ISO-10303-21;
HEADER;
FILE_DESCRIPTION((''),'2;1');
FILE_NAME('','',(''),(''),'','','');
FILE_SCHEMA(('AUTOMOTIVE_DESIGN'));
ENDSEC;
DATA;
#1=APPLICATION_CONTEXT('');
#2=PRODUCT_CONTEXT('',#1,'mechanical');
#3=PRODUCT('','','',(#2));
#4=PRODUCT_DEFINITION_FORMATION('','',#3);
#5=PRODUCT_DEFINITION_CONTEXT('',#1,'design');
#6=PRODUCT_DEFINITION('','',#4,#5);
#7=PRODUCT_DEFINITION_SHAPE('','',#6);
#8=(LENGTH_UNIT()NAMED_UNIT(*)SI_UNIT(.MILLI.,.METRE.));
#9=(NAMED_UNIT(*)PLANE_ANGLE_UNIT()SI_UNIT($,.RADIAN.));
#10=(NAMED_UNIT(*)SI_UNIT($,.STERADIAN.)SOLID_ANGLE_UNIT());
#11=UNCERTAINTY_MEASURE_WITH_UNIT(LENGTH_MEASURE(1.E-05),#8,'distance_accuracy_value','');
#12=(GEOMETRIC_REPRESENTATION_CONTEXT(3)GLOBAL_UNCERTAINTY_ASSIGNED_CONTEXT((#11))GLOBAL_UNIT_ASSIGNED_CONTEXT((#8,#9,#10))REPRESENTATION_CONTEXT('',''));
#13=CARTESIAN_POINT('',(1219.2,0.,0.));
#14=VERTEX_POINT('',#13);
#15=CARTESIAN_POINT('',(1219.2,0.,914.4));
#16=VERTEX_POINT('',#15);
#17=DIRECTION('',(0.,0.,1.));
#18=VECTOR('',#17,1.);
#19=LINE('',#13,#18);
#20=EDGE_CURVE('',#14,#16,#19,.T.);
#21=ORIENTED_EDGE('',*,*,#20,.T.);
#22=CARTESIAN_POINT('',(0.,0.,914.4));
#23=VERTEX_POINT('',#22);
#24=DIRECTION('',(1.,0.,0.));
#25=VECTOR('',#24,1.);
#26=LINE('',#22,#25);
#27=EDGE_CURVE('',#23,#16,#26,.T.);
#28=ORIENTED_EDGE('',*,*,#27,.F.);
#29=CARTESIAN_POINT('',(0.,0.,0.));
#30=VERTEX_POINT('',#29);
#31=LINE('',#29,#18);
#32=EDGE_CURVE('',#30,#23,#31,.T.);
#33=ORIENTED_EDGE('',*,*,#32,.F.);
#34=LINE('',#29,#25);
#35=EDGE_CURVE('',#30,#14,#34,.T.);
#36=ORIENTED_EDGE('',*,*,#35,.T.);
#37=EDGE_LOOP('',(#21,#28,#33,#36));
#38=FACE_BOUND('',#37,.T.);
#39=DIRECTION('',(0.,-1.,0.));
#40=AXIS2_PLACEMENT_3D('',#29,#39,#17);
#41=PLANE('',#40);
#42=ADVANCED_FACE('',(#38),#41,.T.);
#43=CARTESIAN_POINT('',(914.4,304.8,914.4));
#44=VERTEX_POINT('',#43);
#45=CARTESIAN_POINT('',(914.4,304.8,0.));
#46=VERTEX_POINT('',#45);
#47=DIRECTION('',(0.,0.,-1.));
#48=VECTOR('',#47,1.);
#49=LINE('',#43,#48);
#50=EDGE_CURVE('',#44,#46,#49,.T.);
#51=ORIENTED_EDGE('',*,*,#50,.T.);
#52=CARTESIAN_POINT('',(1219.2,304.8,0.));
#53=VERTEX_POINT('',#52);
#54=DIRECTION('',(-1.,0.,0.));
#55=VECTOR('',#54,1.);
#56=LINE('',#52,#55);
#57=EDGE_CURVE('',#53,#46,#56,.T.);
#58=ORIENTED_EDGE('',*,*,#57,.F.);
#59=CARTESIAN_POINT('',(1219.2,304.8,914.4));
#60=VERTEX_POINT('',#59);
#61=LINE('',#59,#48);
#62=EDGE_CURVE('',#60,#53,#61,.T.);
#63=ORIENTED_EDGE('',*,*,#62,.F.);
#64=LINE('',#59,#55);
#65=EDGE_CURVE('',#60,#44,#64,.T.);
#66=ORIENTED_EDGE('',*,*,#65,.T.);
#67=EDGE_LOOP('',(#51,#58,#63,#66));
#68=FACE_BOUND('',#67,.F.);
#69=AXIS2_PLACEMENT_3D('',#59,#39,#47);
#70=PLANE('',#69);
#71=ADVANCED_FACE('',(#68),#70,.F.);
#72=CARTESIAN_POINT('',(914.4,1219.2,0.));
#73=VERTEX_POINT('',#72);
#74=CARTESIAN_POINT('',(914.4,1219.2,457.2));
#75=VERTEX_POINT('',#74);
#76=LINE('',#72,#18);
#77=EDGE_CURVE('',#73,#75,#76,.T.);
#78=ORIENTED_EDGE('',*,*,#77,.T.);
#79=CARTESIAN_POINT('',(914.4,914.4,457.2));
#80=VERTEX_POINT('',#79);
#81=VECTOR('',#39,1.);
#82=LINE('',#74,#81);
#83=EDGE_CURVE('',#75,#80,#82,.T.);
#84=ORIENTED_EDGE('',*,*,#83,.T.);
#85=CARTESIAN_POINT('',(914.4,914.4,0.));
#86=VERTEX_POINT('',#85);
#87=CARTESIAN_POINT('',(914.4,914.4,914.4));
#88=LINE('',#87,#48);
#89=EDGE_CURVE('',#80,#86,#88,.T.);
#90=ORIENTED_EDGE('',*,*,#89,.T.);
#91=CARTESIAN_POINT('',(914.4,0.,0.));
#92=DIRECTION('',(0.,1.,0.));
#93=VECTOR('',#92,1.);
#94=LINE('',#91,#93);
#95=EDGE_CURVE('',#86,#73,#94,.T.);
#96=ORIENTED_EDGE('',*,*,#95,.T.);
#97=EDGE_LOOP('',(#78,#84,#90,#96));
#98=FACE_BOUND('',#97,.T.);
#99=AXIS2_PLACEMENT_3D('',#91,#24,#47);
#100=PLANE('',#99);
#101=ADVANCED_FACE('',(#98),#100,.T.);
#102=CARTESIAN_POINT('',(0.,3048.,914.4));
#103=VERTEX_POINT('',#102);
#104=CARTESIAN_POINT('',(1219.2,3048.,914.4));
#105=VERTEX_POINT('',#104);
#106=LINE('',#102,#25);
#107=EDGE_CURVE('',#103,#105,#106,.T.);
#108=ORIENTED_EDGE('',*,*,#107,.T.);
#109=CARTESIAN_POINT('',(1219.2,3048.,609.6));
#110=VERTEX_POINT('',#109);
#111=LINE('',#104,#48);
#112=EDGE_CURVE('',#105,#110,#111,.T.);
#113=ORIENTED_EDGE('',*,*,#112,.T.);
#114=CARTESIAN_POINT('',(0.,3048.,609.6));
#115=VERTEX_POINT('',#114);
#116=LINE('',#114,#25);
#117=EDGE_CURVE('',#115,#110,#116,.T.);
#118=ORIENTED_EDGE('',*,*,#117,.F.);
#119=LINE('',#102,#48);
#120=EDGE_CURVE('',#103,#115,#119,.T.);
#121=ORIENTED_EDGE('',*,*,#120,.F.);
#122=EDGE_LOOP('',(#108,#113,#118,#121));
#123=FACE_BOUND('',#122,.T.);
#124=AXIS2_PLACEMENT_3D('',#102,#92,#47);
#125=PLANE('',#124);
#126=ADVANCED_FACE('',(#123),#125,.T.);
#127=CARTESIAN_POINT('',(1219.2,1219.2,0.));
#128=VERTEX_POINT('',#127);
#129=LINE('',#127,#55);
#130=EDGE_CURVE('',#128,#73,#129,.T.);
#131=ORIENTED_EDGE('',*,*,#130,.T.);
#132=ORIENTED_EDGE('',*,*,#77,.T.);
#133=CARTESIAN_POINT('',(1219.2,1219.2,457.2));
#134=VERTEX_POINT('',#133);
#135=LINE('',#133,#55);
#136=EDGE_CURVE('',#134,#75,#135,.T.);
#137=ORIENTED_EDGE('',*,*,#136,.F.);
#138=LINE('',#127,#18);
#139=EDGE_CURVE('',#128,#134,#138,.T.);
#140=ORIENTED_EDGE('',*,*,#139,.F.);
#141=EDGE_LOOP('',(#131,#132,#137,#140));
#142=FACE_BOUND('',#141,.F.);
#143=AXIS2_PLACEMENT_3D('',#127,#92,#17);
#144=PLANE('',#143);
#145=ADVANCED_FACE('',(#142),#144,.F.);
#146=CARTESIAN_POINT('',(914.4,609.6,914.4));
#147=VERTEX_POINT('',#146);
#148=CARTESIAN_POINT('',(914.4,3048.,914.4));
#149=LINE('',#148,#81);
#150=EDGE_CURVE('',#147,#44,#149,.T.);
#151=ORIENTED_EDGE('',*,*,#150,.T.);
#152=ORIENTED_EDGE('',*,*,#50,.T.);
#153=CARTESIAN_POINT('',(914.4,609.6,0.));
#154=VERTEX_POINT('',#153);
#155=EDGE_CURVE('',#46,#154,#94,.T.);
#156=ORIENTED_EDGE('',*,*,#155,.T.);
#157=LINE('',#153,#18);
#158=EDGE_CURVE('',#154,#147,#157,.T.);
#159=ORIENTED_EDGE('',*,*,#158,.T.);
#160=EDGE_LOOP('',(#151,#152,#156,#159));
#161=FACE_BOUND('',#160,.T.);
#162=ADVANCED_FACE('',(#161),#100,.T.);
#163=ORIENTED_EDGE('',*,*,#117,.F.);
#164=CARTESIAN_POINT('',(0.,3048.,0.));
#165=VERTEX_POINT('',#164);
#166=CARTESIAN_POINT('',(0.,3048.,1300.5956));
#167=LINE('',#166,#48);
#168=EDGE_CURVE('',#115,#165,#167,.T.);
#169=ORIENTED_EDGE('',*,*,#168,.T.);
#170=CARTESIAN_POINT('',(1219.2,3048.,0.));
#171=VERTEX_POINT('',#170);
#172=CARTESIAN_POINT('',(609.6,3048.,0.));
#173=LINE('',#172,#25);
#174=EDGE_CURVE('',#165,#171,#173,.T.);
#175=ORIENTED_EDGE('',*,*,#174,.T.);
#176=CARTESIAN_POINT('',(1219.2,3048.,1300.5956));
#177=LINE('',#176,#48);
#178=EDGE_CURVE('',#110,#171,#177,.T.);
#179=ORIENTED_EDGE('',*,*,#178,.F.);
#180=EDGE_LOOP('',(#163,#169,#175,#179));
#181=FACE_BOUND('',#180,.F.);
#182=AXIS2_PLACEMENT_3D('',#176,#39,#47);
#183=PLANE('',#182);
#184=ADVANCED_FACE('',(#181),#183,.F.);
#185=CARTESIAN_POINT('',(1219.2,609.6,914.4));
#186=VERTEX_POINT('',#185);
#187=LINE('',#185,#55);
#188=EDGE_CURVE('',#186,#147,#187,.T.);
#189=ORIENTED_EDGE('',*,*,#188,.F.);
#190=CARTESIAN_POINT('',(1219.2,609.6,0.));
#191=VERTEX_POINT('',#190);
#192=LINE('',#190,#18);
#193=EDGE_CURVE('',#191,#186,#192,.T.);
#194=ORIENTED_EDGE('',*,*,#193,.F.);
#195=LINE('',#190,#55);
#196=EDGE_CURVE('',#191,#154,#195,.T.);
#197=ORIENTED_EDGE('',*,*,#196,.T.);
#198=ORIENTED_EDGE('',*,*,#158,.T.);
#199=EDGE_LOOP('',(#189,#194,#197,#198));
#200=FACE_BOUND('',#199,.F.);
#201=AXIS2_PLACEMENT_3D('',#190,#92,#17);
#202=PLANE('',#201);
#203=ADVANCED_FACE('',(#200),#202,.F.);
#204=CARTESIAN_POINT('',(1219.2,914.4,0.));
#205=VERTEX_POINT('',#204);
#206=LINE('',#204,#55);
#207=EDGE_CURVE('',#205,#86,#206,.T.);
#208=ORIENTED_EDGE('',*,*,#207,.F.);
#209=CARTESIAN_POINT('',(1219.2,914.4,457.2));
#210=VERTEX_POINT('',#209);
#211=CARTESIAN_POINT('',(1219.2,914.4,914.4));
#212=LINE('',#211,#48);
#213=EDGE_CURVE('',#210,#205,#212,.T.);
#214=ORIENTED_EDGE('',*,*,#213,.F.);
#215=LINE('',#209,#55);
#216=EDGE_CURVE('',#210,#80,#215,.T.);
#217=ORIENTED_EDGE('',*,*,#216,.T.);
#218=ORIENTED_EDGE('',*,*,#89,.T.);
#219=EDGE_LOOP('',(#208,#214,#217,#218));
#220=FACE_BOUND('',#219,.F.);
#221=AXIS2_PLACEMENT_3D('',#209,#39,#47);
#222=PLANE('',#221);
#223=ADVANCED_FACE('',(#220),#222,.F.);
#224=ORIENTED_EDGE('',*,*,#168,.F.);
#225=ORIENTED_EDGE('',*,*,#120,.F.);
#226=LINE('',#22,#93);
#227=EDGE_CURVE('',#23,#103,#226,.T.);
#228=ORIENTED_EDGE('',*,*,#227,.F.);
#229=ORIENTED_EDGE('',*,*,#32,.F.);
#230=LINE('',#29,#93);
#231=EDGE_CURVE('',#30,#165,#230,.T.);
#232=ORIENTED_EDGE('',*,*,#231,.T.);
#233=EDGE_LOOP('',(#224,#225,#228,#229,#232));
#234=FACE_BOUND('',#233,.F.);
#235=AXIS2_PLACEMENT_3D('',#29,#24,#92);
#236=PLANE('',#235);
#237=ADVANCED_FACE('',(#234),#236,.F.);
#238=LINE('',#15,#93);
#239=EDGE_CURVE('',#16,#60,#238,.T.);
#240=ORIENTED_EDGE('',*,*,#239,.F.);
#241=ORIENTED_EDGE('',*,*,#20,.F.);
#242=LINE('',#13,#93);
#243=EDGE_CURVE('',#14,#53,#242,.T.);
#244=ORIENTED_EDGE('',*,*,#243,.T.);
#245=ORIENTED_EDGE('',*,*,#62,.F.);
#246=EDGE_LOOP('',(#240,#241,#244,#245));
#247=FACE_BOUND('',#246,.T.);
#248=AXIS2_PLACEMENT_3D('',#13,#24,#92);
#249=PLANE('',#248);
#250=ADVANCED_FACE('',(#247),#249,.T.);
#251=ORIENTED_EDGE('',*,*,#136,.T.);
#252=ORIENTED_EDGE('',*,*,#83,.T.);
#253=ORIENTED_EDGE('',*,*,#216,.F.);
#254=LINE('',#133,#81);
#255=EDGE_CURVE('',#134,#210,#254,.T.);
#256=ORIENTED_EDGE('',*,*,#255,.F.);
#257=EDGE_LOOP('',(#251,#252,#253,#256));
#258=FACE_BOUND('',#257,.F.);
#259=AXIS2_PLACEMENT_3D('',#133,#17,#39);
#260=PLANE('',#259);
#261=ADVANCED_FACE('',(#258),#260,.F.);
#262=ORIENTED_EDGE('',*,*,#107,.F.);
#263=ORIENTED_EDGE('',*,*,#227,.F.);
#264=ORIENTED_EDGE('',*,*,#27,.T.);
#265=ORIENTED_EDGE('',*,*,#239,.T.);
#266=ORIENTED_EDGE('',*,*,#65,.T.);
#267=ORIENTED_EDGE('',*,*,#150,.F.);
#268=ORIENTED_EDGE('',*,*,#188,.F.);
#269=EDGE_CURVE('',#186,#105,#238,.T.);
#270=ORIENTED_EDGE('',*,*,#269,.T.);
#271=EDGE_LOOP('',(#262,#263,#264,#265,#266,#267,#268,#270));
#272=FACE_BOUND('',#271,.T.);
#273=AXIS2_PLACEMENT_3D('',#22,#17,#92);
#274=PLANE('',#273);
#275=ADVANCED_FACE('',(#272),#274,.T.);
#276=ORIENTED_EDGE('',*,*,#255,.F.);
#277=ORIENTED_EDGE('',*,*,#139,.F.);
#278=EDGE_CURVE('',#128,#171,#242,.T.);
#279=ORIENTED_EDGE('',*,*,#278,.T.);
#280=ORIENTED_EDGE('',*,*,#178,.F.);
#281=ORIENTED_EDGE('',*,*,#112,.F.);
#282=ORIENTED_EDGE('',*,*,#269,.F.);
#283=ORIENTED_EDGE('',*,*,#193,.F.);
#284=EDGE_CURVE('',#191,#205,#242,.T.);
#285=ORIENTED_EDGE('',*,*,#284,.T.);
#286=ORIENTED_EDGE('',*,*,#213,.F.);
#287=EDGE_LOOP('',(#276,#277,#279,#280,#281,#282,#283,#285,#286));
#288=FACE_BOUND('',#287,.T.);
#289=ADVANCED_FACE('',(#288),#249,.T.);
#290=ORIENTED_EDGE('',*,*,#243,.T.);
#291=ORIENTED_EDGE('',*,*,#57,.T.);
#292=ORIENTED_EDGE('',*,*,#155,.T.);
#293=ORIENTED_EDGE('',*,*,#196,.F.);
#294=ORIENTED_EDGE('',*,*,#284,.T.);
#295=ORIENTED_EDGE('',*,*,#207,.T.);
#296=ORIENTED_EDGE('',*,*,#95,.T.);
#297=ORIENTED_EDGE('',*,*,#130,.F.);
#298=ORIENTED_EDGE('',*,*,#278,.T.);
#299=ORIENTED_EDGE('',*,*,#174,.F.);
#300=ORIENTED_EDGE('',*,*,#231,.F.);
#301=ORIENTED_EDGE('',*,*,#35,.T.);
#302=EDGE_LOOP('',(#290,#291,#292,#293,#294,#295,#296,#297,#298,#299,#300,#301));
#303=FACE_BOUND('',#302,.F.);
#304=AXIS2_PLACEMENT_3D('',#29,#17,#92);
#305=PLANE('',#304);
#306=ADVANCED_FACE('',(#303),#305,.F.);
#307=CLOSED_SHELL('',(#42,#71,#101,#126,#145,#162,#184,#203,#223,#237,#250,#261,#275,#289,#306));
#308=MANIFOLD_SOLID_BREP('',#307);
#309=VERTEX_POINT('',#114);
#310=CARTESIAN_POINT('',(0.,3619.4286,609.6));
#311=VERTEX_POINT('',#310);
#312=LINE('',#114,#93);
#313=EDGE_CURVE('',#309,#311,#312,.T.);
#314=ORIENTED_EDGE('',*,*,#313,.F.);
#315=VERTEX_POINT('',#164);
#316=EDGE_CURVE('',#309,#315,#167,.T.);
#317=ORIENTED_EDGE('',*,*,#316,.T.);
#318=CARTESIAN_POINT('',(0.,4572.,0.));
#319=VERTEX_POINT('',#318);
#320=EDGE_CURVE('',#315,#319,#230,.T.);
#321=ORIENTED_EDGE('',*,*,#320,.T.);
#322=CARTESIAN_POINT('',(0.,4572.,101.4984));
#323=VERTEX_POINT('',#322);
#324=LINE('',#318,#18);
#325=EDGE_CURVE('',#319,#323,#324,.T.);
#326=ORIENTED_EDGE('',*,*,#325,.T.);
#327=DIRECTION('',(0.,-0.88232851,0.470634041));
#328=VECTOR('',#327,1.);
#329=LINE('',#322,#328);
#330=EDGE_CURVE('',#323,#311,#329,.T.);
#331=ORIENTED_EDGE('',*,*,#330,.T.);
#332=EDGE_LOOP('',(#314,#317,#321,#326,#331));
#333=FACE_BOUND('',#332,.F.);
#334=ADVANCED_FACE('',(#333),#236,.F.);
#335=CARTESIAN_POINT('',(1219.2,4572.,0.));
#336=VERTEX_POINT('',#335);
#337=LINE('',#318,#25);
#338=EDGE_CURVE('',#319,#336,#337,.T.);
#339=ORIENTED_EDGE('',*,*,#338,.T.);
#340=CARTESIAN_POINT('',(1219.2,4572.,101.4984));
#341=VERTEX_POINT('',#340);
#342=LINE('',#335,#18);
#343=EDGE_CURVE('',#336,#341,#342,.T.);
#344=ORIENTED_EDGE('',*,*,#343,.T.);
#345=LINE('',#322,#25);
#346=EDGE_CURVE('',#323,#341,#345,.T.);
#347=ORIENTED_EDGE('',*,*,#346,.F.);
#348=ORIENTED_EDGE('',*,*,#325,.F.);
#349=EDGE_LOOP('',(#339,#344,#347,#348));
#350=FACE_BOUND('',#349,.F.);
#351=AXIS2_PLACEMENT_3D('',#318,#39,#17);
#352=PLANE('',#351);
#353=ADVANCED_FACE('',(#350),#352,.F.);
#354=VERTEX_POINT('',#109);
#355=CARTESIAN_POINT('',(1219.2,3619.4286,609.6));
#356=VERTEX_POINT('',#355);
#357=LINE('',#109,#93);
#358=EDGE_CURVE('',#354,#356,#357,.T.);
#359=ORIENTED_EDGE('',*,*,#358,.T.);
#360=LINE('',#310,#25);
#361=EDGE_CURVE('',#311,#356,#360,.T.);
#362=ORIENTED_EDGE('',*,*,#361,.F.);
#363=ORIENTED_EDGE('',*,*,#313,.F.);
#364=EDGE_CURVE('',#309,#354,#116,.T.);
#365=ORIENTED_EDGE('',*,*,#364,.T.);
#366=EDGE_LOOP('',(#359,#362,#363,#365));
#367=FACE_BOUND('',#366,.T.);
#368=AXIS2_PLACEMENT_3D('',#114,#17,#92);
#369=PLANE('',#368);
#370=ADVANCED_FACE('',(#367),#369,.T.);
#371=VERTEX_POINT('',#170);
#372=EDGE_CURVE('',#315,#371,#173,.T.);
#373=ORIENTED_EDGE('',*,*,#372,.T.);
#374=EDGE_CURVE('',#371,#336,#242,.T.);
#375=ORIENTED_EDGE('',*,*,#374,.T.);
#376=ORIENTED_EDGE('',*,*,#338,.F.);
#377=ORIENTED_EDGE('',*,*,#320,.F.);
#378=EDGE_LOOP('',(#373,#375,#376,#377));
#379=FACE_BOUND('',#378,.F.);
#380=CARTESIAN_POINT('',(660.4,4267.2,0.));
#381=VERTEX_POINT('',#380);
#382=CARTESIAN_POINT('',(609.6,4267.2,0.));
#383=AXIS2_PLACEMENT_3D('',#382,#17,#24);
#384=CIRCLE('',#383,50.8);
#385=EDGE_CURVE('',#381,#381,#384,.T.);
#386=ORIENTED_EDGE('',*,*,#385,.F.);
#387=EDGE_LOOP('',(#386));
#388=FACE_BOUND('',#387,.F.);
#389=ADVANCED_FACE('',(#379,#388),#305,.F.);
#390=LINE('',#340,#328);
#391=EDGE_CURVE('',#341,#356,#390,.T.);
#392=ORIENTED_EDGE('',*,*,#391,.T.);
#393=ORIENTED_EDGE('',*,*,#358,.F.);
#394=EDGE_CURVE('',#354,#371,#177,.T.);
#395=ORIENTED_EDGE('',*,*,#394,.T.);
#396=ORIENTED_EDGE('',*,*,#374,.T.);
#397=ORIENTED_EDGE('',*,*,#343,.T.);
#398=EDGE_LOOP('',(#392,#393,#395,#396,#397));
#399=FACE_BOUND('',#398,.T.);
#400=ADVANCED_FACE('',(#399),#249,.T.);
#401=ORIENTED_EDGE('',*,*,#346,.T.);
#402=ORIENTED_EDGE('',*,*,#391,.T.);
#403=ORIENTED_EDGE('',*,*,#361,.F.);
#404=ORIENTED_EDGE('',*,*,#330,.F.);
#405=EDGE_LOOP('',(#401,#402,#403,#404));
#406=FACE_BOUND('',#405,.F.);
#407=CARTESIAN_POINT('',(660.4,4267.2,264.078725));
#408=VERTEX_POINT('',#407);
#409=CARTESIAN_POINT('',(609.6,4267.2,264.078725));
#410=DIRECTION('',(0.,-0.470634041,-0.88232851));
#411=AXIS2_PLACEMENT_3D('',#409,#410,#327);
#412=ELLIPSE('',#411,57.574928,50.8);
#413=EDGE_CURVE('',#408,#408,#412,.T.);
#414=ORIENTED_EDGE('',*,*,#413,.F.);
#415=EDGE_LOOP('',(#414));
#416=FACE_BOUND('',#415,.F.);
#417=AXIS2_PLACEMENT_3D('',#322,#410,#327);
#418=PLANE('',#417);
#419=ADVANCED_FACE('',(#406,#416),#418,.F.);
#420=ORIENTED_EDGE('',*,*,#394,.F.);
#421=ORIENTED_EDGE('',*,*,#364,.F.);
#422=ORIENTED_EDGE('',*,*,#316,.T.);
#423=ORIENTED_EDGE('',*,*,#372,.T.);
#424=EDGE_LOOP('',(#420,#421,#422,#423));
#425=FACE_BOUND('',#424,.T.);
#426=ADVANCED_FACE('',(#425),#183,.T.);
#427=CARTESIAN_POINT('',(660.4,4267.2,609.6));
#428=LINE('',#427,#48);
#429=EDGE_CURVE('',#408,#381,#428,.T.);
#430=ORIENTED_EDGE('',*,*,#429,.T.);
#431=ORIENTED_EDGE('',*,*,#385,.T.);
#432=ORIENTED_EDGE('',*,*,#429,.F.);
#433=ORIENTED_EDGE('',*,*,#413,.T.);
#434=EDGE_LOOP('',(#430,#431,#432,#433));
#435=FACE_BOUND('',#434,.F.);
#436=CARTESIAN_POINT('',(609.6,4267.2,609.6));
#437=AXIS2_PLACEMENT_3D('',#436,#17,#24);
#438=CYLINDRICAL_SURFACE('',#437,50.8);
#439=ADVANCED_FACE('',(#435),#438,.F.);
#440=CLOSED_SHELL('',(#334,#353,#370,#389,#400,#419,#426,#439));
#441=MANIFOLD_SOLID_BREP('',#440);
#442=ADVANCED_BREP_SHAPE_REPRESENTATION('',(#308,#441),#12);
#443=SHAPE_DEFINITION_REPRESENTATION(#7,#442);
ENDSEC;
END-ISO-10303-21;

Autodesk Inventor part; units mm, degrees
ref_plane "YZ Plane" through (0, 0, 0) normal (1, 0, 0) x (0, 1, 0)
ref_plane "XZ Plane" through (0, 0, 0) normal (0, 1, 0) x (-1, 0, 0)
ref_plane "XY Plane" through (0, 0, 0) normal (0, 0, 1) x (1, 0, 0)
sketch "Sketch1" plane through (0, 0, 0) normal (1, 0, 0) x (0, 1, 0)
  line L0 (0, 0) -> (4572, 0)
  line L1 (0, 0) -> (0, 914.4)
  line L2 (0, 914.4) -> (3048, 914.4)
  line L3 (3048, 914.4) -> (3048, 609.6)
  line L4 (4572, 0) -> (4572, 101.4984)
  line L5 (4572, 101.4984) -> (3619.4286, 609.6)
  line L6 (3048, 609.6) -> (3619.4286, 609.6)
  dimension "d0" = 4572
  dimension "d1" = 914.4
  dimension "d2" = 3048
  dimension "d3" = 304.8
  dimension "d4" = 101.4984
  dimension "d5" = 571.4286
extrude "Extrusion1" add sketch "Sketch1" along normal blind 1219.2
sketch "Sketch2" plane through (1219.2, 0, 0) normal (1, 0, 0) x (0, 0, -1)
  line L0 (0, 0) -> (0, 4572) projected
  line L1 (-914.4, 3048) -> (-914.4, 0) projected
  line L2 (0, 609.6) -> (-914.4, 609.6)
  line L3 (-914.4, 609.6) -> (-914.4, 304.8)
  line L4 (-914.4, 304.8) -> (0, 304.8)
  line L5 (0, 304.8) -> (0, 609.6)
  line L6 (0, 1219.2) -> (-914.4, 1219.2)
  line L7 (-914.4, 1219.2) -> (-914.4, 914.4)
  line L8 (-914.4, 914.4) -> (0, 914.4)
  line L9 (0, 914.4) -> (0, 1219.2)
  line L10 (-457.2, 1219.2) -> (-457.2, 914.4)
  point P0 (0, 304.8)
  point P1 (0, 914.4)
  dimension "d8" = 304.8
  dimension "d9" = 304.8
  dimension "d10" = 304.8
  dimension "d11" = 304.8
  dimension "d12" = 304.8
  dimension "d13" = 304.8
extrude "Extrusion2" cut sketch "Sketch2" against normal blind 304.8 contours L4 L1 L2 L0 | L8 L10 L6 L0
sketch "Sketch3" plane through (0, 3048, 609.6) normal (0, 0, 1) x (1, 0, 0)
  line L0 (0, 1524) -> (0, 571.4286) projected
  line L1 (0, 571.4286) -> (1219.2, 571.4286) projected
  line L2 (1219.2, 1524) -> (1219.2, 571.4286) projected
  line L3 (0, 1524) -> (1219.2, 1524) projected
  line L4 (0, 1524) -> (1219.2, 1524) construction
  line L5 (609.6, 1524) -> (609.6, 571.4286) construction
  line L6 (0, -3048) -> (0, 1524) construction
  line L7 (0, 1219.2) -> (1219.2, 1219.2) construction
  circle A0 centre (609.6, 1219.2) radius 152.4 construction
  circle A1 centre (609.6, 1219.2) radius 50.8
  dimension "d16" = 304.8
  dimension "d17" = 304.8
  dimension "d18" = 101.6
extrude "Extrusion3" cut sketch "Sketch3" against normal through all contours A1
sketch "Sketch5" plane through (1219.2, 0, 0) normal (1, 0, 0) x (0, 0, -1)
  line L0 (-1300.5956, 3048) -> (224.2837, 3048)
  point P0 (0, 0)
  point P1 (-914.4, 3048)
surface extrude "ExtrusionSrf1" sketch "Sketch5" against normal up to next shown yes curves L0
split body "Split1" result two bodies by surface "ExtrusionSrf1" first body at (711.2, 2235.2, 913.9)
equation "\"d9\" = d8"
equation "\"d10\" = d8"
properties part number "blocks" material "Granite, Cut, Polished"
